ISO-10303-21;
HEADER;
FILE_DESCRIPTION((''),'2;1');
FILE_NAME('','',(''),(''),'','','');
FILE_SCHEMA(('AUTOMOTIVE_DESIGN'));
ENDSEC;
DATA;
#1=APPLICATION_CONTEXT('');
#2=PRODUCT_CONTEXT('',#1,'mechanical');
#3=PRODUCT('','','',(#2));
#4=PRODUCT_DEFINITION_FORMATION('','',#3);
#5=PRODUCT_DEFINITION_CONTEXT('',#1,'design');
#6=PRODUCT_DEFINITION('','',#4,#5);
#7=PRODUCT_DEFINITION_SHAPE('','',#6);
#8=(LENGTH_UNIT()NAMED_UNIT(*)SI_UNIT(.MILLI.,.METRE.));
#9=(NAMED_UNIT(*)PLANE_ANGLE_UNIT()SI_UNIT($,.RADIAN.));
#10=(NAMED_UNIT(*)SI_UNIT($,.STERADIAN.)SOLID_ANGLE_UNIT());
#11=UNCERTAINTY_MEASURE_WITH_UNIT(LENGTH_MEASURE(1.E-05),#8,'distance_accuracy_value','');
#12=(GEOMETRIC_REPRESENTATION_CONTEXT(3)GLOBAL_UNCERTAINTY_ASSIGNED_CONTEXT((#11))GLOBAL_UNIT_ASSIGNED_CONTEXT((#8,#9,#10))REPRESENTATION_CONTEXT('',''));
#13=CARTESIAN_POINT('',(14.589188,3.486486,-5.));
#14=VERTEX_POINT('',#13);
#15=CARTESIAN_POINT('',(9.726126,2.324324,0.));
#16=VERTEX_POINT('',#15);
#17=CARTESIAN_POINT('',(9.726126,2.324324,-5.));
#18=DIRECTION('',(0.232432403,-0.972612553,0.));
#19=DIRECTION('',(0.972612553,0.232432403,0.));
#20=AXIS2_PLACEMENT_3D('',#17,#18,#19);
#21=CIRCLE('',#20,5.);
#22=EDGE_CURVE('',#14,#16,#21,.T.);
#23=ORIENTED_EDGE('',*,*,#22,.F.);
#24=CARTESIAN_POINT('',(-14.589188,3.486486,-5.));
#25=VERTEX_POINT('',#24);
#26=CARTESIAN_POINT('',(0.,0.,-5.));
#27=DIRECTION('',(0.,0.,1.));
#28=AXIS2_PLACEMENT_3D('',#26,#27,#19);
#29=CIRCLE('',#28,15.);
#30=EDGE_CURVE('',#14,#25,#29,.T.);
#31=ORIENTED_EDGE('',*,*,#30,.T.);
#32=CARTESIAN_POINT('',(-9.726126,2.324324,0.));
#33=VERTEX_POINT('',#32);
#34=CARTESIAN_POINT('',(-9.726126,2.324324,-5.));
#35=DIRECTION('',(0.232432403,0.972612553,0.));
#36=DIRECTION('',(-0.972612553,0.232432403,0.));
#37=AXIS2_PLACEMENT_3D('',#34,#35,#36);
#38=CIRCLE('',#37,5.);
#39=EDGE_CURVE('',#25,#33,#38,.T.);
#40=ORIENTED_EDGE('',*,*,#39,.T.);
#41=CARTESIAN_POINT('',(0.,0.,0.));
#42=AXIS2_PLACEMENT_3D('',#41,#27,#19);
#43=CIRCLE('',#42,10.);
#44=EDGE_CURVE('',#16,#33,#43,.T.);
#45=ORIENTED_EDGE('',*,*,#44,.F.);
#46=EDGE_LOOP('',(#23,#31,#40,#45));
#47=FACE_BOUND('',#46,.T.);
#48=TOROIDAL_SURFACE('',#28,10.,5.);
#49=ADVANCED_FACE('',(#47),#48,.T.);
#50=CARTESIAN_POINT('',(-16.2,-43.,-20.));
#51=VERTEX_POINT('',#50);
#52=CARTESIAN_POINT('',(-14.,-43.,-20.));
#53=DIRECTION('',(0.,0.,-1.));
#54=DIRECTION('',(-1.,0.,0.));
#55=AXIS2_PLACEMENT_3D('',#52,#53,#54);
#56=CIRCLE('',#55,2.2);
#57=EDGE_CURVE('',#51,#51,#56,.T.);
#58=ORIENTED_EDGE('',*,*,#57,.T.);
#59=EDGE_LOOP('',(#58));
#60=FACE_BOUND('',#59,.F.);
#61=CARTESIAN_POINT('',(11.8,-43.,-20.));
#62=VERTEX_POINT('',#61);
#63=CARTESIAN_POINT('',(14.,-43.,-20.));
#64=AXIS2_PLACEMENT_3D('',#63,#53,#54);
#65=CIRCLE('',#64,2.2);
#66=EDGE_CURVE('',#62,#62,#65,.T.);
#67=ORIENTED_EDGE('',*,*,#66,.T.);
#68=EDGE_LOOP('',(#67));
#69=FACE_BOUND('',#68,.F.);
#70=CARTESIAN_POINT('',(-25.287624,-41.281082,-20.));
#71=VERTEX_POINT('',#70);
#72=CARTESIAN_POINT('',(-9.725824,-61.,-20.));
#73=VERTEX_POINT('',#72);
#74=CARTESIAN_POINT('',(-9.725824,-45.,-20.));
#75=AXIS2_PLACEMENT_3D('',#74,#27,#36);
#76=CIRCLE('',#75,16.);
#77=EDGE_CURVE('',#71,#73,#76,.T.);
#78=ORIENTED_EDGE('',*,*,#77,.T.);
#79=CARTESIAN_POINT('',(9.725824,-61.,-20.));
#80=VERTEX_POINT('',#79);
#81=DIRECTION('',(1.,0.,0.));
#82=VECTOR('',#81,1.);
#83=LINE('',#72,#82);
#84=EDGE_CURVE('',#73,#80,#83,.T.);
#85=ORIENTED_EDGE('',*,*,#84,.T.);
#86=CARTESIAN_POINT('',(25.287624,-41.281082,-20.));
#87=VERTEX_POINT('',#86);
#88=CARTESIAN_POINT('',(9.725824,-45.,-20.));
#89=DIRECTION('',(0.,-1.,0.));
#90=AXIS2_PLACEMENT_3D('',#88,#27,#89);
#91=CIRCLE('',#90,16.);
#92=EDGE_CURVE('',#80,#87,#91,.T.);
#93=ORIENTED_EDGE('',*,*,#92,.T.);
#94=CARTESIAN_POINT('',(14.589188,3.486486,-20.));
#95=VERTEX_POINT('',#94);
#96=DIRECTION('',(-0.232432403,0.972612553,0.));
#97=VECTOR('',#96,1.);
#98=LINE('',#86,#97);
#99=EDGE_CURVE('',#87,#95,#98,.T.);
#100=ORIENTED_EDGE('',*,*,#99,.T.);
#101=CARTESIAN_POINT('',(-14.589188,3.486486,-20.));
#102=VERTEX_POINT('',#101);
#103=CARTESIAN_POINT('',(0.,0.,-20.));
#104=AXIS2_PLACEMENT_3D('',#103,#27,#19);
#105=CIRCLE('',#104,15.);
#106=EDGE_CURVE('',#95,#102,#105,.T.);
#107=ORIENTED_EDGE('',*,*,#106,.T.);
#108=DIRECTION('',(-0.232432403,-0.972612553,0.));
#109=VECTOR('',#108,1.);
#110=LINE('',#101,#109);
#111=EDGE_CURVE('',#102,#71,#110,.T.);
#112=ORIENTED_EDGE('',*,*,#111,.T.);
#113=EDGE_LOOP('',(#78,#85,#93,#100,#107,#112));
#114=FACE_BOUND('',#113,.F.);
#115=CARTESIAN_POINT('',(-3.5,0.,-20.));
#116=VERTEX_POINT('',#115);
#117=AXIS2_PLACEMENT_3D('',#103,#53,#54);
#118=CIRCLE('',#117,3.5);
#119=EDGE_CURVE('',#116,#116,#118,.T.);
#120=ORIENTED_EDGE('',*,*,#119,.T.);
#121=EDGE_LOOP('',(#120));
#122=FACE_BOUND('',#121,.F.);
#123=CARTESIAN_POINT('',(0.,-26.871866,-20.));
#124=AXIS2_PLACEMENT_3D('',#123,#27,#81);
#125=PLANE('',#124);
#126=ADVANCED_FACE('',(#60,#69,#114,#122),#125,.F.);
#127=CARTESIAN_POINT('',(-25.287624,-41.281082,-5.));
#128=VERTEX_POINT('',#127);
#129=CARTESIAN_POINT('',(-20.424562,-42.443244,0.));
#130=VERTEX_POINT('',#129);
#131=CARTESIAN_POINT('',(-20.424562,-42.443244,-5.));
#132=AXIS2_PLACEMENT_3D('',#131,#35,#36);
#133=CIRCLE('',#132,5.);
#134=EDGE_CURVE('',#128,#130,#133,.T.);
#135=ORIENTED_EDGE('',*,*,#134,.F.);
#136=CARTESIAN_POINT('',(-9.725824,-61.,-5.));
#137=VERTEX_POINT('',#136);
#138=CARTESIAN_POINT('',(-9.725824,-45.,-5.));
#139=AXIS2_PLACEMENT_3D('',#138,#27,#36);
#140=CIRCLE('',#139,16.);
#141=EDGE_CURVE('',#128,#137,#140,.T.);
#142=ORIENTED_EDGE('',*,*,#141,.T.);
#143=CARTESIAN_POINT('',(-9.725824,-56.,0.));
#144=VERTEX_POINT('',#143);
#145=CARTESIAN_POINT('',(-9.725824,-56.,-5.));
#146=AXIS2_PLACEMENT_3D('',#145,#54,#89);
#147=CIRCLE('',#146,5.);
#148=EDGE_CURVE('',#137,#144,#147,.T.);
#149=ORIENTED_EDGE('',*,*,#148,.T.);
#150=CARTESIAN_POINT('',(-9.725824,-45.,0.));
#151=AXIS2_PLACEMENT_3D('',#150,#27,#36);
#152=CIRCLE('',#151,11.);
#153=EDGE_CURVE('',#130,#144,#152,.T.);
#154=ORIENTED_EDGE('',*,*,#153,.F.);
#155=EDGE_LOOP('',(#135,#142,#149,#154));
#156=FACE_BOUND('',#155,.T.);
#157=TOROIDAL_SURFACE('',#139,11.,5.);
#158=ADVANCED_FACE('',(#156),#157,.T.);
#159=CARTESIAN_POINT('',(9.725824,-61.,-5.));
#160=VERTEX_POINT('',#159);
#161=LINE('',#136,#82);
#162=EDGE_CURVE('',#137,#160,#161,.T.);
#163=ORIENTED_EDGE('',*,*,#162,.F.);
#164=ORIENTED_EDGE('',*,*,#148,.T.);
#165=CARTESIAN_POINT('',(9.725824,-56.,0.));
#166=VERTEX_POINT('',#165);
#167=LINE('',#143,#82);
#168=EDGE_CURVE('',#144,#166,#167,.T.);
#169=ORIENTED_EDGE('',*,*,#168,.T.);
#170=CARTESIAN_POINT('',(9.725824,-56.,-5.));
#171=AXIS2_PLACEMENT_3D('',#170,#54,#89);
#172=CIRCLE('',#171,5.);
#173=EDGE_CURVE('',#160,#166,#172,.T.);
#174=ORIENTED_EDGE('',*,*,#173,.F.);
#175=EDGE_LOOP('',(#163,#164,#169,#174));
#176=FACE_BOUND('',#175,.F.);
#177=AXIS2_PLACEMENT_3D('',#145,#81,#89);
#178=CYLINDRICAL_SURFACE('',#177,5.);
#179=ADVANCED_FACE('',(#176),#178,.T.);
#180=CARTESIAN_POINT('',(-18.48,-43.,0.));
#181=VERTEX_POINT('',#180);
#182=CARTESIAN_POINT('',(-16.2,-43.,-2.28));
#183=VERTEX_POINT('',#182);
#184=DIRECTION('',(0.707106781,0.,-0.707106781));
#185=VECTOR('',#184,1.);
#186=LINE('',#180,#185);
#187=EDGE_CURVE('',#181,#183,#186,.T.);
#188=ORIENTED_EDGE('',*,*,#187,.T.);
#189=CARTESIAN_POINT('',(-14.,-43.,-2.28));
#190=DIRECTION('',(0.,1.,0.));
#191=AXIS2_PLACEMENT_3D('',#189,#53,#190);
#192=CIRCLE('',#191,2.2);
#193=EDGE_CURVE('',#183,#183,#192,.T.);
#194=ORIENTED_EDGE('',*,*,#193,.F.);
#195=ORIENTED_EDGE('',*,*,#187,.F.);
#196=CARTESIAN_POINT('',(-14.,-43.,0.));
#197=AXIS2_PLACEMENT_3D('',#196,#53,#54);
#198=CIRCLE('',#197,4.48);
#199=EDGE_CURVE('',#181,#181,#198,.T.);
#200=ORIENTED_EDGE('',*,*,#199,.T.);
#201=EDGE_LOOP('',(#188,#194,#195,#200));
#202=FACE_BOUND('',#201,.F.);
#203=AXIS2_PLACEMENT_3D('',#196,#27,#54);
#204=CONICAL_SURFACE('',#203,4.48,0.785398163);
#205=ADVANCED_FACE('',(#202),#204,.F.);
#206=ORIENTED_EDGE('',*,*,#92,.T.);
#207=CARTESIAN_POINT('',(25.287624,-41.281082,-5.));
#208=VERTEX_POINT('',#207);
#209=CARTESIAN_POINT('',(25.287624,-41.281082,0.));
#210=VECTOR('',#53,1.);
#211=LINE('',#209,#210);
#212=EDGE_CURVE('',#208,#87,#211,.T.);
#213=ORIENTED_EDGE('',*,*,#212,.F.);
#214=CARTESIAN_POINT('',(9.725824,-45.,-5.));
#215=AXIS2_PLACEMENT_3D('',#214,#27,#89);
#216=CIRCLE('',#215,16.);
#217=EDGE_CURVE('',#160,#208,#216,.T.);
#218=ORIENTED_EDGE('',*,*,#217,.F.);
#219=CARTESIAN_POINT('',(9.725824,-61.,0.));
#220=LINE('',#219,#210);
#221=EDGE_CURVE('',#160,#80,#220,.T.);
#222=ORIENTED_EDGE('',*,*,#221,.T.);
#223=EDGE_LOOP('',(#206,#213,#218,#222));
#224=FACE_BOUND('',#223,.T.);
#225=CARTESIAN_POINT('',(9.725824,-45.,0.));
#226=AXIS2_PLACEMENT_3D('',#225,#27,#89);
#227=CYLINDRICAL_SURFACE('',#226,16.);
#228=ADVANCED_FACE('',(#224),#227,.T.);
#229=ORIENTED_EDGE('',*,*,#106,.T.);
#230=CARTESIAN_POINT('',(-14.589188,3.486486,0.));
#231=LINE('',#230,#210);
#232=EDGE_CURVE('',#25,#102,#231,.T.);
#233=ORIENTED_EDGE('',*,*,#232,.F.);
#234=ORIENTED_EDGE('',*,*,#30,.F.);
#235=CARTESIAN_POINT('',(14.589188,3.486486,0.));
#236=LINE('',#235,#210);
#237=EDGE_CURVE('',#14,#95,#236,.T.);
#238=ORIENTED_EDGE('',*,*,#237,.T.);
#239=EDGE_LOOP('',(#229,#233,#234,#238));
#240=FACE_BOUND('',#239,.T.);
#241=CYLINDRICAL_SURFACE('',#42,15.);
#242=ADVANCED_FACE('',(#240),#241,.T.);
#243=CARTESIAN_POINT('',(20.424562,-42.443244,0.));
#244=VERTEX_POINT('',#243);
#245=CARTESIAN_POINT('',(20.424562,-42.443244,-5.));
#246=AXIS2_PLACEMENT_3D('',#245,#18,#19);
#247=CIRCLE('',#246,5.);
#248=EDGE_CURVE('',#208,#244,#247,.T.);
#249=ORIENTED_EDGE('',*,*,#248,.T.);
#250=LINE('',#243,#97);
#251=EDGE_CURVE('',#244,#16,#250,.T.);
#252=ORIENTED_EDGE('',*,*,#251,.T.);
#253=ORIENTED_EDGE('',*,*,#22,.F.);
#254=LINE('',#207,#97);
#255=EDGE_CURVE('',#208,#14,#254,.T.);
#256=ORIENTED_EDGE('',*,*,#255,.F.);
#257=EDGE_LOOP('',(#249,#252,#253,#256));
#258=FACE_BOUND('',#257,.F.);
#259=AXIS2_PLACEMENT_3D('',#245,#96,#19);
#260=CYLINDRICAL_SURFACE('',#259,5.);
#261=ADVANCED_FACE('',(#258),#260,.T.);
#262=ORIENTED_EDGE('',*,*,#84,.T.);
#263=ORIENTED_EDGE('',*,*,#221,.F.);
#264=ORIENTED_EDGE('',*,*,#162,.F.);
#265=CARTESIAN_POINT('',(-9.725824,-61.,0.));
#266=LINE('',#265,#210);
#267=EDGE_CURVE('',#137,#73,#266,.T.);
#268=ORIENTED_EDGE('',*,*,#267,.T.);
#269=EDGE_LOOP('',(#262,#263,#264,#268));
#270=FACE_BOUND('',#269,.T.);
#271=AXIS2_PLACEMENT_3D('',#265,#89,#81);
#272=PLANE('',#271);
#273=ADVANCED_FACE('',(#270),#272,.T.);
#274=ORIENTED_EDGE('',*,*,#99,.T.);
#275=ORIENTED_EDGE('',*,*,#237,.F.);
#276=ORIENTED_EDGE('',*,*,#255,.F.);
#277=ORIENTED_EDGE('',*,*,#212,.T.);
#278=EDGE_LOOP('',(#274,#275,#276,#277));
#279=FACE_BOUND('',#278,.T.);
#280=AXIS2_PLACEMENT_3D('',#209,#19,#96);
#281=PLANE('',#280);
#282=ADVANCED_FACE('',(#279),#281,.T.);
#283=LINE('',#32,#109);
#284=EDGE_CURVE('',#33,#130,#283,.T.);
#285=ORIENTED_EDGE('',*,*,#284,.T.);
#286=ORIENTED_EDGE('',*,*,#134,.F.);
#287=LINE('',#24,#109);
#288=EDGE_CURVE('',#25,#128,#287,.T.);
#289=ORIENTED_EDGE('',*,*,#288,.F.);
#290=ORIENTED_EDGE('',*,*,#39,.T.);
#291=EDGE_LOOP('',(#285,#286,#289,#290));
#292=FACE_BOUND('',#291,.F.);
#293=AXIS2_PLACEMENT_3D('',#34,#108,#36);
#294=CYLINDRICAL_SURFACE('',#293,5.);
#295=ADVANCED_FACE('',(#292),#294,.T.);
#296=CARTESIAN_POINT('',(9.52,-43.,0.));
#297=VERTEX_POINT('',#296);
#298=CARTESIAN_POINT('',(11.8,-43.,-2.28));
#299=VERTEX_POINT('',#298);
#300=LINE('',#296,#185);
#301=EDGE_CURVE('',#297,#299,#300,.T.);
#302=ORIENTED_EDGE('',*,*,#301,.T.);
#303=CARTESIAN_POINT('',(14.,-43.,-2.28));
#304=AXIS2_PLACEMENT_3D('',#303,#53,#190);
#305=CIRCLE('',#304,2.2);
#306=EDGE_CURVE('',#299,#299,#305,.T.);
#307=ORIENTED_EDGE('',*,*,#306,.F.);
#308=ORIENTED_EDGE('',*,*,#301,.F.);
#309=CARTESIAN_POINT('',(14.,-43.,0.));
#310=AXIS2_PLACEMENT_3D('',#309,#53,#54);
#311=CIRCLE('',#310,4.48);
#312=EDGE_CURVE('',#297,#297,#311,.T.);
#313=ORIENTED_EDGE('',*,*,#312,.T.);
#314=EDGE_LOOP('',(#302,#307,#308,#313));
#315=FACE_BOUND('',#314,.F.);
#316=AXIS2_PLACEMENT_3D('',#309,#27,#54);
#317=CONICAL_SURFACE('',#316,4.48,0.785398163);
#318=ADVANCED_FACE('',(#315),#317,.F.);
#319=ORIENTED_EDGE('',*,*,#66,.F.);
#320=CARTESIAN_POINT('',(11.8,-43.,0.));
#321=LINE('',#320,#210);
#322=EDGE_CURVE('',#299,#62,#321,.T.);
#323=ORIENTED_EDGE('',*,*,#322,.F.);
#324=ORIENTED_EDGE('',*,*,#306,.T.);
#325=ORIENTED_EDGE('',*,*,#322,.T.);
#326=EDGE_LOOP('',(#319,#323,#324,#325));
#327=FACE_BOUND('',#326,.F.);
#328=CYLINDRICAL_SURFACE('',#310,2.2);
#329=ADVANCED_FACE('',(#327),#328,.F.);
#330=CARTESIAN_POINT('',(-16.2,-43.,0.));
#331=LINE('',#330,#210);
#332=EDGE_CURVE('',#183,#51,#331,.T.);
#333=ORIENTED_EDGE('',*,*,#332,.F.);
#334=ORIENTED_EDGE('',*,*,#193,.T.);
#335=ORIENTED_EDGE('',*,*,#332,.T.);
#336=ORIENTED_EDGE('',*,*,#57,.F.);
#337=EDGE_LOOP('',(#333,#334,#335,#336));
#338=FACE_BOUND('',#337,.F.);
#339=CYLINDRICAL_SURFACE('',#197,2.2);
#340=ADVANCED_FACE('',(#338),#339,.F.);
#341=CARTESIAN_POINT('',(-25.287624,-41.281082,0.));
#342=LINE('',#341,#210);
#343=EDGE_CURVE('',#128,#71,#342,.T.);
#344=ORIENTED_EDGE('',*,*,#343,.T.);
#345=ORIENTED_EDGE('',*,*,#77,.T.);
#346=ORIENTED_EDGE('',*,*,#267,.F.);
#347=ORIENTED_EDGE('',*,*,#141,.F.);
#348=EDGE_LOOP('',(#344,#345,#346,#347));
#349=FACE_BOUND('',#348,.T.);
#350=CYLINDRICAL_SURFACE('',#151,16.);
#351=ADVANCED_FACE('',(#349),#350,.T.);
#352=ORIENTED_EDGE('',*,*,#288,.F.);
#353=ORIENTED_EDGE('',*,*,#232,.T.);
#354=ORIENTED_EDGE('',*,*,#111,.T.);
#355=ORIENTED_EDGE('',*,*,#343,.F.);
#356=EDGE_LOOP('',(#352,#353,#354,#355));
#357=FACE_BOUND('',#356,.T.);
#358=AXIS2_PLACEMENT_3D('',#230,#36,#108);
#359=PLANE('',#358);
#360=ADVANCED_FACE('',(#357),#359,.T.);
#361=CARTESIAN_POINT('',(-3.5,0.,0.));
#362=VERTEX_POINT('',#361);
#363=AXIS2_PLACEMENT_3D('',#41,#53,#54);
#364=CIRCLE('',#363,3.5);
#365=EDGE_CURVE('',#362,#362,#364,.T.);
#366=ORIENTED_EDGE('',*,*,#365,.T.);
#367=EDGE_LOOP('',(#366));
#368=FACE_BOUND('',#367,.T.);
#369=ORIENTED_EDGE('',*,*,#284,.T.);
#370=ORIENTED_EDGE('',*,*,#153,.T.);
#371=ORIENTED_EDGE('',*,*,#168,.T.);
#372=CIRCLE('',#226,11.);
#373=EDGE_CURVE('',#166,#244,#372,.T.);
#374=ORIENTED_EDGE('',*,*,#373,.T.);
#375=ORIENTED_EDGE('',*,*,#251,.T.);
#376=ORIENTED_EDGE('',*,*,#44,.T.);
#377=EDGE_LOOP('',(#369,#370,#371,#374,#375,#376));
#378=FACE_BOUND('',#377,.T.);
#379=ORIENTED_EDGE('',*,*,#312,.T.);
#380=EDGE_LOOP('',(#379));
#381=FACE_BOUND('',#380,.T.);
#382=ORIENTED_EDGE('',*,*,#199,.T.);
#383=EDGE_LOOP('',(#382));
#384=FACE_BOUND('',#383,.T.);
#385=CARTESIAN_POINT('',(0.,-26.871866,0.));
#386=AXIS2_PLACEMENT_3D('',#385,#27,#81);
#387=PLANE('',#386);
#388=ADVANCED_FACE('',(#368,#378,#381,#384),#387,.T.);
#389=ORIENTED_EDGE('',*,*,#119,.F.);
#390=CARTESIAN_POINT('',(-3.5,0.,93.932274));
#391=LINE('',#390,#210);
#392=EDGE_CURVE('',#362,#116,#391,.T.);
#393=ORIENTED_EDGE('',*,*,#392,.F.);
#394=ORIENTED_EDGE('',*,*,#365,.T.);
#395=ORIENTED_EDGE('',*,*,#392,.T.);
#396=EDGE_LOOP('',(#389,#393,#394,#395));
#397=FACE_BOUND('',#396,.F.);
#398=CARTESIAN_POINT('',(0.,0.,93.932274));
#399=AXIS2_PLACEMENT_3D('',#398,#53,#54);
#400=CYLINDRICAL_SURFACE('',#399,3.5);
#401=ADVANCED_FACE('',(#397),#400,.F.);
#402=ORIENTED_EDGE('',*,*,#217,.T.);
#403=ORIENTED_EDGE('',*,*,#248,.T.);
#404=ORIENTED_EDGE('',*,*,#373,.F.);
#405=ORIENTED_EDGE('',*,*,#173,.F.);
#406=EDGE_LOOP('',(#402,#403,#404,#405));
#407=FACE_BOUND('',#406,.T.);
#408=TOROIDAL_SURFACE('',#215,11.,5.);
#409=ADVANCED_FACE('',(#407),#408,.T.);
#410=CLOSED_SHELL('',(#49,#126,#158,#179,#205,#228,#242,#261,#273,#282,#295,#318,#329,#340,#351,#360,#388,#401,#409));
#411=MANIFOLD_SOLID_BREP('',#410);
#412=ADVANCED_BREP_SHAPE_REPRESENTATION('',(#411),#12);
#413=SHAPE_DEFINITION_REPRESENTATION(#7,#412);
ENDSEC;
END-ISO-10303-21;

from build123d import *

# Parameters (mm, degrees)
F1_DEPTH       = 20
F2_D           = 4.4
F2_CSINK_D     = 8.96
F2_CSINK_ANGLE = 90
F3_R           = 5
F4_D           = 7


# Not quite as in the source:
# - a feature names something its author has since deleted; it is built from what else it names


with BuildPart() as f1:
    # F0 (on Top) → F1 (new body)
    with BuildSketch(Plane.XY):
        with BuildLine():
            Line((-9.7258236175, -61), (9.7258236175, -61))
            ThreePointArc((9.7258236175, -61), (22.2857339512, -54.9120458236), (25.2876244635, -41.2810815511))
            Line((25.2876244635, -41.2810815511), (14.5891882931, 3.4864860458))
            ThreePointArc((14.5891882931, 3.4864860458), (0, 15), (-14.5891882931, 3.4864860458))
            Line((-14.5891882931, 3.4864860458), (-25.2876244635, -41.2810815511))
            ThreePointArc((-25.2876244635, -41.2810815511), (-22.2857339512, -54.9120458236), (-9.7258236175, -61))
        make_face()
    extrude(amount=-F1_DEPTH)

    # F2 (through all)
    with Locations(Plane.XY):
        with Locations((-14, -43), (14, -43)):
            CounterSinkHole(F2_D / 2, F2_CSINK_D / 2, counter_sink_angle=F2_CSINK_ANGLE)

    # F3
    f3_edges = [f1.edges().sort_by_distance(p)[0] for p in [
        (0, -61, 0),
        (-19.938406, -18.897298, 0),
        (19.938406, -18.897298, 0),
    ]]
    fillet(f3_edges, radius=F3_R)

    # F4 (through all)
    with Locations(Plane.XY):
        with Locations((0, 0)):
            Hole(F4_D / 2)


solid = f1.part
